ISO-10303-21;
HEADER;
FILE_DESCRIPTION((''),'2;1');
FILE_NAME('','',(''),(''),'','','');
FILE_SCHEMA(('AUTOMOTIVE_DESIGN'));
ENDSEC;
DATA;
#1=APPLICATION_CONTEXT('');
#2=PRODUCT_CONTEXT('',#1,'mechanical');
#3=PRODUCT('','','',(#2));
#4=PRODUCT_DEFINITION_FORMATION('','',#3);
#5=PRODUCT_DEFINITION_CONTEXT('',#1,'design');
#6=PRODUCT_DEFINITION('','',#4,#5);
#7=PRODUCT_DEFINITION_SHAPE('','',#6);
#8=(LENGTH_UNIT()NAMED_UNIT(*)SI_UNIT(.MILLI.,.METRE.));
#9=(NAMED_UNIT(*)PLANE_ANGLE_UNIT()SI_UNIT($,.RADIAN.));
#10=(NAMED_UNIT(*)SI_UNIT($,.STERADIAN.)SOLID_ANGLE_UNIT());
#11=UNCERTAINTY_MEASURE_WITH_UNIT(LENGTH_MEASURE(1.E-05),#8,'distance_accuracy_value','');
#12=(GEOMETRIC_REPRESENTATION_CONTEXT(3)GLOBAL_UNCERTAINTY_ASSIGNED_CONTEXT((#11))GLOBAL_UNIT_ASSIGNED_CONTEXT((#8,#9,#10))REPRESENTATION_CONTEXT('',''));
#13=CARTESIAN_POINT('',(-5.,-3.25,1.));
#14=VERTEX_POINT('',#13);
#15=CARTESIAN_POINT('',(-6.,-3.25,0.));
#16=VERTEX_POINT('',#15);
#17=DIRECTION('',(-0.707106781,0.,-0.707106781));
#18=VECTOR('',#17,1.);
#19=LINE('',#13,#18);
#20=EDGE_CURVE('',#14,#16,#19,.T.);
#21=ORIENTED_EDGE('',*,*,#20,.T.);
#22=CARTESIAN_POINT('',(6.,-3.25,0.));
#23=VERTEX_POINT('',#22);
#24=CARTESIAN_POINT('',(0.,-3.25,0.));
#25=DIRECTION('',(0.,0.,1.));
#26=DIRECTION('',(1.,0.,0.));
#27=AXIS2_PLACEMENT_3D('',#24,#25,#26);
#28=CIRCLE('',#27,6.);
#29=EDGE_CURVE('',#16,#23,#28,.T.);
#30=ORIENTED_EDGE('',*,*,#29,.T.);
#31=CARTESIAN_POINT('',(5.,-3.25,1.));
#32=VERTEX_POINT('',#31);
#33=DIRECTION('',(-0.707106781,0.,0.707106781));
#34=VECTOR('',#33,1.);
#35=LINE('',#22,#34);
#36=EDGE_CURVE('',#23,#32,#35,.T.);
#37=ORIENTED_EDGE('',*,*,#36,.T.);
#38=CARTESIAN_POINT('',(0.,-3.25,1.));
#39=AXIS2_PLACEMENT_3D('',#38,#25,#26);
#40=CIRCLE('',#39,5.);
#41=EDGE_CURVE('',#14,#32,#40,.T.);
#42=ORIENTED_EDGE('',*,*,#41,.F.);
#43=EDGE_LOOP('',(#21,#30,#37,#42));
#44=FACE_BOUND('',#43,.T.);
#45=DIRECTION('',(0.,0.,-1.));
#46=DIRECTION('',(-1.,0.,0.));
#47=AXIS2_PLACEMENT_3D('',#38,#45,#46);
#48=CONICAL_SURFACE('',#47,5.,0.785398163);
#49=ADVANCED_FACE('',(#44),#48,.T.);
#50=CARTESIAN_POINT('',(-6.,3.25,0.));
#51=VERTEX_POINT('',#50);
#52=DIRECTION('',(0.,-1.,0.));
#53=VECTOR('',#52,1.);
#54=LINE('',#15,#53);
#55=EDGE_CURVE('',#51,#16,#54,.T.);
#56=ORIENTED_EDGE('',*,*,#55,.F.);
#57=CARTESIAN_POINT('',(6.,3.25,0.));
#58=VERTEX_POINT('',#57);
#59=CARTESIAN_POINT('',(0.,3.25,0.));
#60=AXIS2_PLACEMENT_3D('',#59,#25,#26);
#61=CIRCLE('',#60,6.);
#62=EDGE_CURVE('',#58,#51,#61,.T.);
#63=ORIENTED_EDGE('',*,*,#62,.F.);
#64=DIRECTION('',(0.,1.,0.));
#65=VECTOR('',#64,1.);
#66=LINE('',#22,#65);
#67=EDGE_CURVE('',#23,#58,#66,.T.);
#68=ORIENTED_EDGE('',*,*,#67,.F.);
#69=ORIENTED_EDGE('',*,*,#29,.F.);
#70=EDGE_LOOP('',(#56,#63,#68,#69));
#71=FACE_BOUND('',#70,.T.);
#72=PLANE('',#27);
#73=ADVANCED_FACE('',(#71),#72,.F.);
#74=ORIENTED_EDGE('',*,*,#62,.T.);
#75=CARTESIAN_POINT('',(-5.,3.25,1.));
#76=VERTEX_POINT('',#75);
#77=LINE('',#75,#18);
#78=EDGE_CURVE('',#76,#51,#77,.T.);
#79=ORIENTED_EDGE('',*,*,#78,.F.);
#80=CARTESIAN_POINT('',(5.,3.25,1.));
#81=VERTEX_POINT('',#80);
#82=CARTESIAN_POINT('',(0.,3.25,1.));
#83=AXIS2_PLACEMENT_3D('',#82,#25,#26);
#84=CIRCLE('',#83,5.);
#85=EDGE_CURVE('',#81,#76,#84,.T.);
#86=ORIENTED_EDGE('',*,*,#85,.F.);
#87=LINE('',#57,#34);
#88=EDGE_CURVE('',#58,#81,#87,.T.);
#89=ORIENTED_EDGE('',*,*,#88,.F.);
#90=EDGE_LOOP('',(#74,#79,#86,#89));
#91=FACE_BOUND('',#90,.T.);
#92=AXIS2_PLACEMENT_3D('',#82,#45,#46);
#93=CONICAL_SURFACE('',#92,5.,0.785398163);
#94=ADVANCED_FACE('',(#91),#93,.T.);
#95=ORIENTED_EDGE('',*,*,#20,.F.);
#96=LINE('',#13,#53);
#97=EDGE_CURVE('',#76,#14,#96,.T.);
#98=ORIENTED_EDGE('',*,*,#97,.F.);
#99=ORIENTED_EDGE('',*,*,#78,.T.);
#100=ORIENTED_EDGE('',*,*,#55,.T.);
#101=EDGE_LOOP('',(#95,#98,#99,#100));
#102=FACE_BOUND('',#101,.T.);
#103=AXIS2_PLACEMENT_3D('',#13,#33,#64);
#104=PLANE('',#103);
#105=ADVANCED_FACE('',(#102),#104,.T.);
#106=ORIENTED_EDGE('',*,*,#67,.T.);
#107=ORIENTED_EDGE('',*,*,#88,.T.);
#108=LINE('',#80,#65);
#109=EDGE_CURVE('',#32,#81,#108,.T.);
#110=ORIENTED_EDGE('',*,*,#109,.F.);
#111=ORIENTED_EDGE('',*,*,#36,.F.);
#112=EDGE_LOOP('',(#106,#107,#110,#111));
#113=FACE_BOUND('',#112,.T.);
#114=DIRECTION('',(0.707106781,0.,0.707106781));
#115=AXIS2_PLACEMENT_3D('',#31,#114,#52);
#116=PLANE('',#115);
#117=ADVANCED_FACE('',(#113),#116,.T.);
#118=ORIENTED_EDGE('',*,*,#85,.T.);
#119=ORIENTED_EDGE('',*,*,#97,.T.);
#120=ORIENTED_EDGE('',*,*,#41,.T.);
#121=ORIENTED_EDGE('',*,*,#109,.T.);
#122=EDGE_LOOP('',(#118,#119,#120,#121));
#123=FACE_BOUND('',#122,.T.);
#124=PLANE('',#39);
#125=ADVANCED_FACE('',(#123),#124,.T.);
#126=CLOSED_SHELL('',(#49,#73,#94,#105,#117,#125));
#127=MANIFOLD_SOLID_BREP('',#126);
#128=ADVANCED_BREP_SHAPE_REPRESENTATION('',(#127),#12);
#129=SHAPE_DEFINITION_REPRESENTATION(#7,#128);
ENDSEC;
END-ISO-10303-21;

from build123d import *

# Parameters (mm, degrees)
SALIENTE_EXTRUIR1_DEPTH = 1
CHAFL_N1_SIZE           = 1


with BuildPart() as part:
    # Croquis1 → Saliente-Extruir1 (new body)
    with BuildSketch(Plane.XY):
        with BuildLine():
            Line((-6, -3.25), (-6, 3.25))
            ThreePointArc((-6, 3.25), (0, 9.25), (6, 3.25))
            Line((6, 3.25), (6, -3.25))
            ThreePointArc((6, -3.25), (0, -9.25), (-6, -3.25))
        make_face()
    extrude(amount=SALIENTE_EXTRUIR1_DEPTH)

    # Chaflán1
    chafl_n1_edges = [part.edges().sort_by_distance(p)[0] for p in [
        (0, -9.25, 1),
        (6, 0, 1),
        (-6, 0, 1),
        (0, 9.25, 1),
    ]]
    chamfer(chafl_n1_edges, length=CHAFL_N1_SIZE - 0.0001)  # a hair under: the kernel refuses the full size


solid = part.part
